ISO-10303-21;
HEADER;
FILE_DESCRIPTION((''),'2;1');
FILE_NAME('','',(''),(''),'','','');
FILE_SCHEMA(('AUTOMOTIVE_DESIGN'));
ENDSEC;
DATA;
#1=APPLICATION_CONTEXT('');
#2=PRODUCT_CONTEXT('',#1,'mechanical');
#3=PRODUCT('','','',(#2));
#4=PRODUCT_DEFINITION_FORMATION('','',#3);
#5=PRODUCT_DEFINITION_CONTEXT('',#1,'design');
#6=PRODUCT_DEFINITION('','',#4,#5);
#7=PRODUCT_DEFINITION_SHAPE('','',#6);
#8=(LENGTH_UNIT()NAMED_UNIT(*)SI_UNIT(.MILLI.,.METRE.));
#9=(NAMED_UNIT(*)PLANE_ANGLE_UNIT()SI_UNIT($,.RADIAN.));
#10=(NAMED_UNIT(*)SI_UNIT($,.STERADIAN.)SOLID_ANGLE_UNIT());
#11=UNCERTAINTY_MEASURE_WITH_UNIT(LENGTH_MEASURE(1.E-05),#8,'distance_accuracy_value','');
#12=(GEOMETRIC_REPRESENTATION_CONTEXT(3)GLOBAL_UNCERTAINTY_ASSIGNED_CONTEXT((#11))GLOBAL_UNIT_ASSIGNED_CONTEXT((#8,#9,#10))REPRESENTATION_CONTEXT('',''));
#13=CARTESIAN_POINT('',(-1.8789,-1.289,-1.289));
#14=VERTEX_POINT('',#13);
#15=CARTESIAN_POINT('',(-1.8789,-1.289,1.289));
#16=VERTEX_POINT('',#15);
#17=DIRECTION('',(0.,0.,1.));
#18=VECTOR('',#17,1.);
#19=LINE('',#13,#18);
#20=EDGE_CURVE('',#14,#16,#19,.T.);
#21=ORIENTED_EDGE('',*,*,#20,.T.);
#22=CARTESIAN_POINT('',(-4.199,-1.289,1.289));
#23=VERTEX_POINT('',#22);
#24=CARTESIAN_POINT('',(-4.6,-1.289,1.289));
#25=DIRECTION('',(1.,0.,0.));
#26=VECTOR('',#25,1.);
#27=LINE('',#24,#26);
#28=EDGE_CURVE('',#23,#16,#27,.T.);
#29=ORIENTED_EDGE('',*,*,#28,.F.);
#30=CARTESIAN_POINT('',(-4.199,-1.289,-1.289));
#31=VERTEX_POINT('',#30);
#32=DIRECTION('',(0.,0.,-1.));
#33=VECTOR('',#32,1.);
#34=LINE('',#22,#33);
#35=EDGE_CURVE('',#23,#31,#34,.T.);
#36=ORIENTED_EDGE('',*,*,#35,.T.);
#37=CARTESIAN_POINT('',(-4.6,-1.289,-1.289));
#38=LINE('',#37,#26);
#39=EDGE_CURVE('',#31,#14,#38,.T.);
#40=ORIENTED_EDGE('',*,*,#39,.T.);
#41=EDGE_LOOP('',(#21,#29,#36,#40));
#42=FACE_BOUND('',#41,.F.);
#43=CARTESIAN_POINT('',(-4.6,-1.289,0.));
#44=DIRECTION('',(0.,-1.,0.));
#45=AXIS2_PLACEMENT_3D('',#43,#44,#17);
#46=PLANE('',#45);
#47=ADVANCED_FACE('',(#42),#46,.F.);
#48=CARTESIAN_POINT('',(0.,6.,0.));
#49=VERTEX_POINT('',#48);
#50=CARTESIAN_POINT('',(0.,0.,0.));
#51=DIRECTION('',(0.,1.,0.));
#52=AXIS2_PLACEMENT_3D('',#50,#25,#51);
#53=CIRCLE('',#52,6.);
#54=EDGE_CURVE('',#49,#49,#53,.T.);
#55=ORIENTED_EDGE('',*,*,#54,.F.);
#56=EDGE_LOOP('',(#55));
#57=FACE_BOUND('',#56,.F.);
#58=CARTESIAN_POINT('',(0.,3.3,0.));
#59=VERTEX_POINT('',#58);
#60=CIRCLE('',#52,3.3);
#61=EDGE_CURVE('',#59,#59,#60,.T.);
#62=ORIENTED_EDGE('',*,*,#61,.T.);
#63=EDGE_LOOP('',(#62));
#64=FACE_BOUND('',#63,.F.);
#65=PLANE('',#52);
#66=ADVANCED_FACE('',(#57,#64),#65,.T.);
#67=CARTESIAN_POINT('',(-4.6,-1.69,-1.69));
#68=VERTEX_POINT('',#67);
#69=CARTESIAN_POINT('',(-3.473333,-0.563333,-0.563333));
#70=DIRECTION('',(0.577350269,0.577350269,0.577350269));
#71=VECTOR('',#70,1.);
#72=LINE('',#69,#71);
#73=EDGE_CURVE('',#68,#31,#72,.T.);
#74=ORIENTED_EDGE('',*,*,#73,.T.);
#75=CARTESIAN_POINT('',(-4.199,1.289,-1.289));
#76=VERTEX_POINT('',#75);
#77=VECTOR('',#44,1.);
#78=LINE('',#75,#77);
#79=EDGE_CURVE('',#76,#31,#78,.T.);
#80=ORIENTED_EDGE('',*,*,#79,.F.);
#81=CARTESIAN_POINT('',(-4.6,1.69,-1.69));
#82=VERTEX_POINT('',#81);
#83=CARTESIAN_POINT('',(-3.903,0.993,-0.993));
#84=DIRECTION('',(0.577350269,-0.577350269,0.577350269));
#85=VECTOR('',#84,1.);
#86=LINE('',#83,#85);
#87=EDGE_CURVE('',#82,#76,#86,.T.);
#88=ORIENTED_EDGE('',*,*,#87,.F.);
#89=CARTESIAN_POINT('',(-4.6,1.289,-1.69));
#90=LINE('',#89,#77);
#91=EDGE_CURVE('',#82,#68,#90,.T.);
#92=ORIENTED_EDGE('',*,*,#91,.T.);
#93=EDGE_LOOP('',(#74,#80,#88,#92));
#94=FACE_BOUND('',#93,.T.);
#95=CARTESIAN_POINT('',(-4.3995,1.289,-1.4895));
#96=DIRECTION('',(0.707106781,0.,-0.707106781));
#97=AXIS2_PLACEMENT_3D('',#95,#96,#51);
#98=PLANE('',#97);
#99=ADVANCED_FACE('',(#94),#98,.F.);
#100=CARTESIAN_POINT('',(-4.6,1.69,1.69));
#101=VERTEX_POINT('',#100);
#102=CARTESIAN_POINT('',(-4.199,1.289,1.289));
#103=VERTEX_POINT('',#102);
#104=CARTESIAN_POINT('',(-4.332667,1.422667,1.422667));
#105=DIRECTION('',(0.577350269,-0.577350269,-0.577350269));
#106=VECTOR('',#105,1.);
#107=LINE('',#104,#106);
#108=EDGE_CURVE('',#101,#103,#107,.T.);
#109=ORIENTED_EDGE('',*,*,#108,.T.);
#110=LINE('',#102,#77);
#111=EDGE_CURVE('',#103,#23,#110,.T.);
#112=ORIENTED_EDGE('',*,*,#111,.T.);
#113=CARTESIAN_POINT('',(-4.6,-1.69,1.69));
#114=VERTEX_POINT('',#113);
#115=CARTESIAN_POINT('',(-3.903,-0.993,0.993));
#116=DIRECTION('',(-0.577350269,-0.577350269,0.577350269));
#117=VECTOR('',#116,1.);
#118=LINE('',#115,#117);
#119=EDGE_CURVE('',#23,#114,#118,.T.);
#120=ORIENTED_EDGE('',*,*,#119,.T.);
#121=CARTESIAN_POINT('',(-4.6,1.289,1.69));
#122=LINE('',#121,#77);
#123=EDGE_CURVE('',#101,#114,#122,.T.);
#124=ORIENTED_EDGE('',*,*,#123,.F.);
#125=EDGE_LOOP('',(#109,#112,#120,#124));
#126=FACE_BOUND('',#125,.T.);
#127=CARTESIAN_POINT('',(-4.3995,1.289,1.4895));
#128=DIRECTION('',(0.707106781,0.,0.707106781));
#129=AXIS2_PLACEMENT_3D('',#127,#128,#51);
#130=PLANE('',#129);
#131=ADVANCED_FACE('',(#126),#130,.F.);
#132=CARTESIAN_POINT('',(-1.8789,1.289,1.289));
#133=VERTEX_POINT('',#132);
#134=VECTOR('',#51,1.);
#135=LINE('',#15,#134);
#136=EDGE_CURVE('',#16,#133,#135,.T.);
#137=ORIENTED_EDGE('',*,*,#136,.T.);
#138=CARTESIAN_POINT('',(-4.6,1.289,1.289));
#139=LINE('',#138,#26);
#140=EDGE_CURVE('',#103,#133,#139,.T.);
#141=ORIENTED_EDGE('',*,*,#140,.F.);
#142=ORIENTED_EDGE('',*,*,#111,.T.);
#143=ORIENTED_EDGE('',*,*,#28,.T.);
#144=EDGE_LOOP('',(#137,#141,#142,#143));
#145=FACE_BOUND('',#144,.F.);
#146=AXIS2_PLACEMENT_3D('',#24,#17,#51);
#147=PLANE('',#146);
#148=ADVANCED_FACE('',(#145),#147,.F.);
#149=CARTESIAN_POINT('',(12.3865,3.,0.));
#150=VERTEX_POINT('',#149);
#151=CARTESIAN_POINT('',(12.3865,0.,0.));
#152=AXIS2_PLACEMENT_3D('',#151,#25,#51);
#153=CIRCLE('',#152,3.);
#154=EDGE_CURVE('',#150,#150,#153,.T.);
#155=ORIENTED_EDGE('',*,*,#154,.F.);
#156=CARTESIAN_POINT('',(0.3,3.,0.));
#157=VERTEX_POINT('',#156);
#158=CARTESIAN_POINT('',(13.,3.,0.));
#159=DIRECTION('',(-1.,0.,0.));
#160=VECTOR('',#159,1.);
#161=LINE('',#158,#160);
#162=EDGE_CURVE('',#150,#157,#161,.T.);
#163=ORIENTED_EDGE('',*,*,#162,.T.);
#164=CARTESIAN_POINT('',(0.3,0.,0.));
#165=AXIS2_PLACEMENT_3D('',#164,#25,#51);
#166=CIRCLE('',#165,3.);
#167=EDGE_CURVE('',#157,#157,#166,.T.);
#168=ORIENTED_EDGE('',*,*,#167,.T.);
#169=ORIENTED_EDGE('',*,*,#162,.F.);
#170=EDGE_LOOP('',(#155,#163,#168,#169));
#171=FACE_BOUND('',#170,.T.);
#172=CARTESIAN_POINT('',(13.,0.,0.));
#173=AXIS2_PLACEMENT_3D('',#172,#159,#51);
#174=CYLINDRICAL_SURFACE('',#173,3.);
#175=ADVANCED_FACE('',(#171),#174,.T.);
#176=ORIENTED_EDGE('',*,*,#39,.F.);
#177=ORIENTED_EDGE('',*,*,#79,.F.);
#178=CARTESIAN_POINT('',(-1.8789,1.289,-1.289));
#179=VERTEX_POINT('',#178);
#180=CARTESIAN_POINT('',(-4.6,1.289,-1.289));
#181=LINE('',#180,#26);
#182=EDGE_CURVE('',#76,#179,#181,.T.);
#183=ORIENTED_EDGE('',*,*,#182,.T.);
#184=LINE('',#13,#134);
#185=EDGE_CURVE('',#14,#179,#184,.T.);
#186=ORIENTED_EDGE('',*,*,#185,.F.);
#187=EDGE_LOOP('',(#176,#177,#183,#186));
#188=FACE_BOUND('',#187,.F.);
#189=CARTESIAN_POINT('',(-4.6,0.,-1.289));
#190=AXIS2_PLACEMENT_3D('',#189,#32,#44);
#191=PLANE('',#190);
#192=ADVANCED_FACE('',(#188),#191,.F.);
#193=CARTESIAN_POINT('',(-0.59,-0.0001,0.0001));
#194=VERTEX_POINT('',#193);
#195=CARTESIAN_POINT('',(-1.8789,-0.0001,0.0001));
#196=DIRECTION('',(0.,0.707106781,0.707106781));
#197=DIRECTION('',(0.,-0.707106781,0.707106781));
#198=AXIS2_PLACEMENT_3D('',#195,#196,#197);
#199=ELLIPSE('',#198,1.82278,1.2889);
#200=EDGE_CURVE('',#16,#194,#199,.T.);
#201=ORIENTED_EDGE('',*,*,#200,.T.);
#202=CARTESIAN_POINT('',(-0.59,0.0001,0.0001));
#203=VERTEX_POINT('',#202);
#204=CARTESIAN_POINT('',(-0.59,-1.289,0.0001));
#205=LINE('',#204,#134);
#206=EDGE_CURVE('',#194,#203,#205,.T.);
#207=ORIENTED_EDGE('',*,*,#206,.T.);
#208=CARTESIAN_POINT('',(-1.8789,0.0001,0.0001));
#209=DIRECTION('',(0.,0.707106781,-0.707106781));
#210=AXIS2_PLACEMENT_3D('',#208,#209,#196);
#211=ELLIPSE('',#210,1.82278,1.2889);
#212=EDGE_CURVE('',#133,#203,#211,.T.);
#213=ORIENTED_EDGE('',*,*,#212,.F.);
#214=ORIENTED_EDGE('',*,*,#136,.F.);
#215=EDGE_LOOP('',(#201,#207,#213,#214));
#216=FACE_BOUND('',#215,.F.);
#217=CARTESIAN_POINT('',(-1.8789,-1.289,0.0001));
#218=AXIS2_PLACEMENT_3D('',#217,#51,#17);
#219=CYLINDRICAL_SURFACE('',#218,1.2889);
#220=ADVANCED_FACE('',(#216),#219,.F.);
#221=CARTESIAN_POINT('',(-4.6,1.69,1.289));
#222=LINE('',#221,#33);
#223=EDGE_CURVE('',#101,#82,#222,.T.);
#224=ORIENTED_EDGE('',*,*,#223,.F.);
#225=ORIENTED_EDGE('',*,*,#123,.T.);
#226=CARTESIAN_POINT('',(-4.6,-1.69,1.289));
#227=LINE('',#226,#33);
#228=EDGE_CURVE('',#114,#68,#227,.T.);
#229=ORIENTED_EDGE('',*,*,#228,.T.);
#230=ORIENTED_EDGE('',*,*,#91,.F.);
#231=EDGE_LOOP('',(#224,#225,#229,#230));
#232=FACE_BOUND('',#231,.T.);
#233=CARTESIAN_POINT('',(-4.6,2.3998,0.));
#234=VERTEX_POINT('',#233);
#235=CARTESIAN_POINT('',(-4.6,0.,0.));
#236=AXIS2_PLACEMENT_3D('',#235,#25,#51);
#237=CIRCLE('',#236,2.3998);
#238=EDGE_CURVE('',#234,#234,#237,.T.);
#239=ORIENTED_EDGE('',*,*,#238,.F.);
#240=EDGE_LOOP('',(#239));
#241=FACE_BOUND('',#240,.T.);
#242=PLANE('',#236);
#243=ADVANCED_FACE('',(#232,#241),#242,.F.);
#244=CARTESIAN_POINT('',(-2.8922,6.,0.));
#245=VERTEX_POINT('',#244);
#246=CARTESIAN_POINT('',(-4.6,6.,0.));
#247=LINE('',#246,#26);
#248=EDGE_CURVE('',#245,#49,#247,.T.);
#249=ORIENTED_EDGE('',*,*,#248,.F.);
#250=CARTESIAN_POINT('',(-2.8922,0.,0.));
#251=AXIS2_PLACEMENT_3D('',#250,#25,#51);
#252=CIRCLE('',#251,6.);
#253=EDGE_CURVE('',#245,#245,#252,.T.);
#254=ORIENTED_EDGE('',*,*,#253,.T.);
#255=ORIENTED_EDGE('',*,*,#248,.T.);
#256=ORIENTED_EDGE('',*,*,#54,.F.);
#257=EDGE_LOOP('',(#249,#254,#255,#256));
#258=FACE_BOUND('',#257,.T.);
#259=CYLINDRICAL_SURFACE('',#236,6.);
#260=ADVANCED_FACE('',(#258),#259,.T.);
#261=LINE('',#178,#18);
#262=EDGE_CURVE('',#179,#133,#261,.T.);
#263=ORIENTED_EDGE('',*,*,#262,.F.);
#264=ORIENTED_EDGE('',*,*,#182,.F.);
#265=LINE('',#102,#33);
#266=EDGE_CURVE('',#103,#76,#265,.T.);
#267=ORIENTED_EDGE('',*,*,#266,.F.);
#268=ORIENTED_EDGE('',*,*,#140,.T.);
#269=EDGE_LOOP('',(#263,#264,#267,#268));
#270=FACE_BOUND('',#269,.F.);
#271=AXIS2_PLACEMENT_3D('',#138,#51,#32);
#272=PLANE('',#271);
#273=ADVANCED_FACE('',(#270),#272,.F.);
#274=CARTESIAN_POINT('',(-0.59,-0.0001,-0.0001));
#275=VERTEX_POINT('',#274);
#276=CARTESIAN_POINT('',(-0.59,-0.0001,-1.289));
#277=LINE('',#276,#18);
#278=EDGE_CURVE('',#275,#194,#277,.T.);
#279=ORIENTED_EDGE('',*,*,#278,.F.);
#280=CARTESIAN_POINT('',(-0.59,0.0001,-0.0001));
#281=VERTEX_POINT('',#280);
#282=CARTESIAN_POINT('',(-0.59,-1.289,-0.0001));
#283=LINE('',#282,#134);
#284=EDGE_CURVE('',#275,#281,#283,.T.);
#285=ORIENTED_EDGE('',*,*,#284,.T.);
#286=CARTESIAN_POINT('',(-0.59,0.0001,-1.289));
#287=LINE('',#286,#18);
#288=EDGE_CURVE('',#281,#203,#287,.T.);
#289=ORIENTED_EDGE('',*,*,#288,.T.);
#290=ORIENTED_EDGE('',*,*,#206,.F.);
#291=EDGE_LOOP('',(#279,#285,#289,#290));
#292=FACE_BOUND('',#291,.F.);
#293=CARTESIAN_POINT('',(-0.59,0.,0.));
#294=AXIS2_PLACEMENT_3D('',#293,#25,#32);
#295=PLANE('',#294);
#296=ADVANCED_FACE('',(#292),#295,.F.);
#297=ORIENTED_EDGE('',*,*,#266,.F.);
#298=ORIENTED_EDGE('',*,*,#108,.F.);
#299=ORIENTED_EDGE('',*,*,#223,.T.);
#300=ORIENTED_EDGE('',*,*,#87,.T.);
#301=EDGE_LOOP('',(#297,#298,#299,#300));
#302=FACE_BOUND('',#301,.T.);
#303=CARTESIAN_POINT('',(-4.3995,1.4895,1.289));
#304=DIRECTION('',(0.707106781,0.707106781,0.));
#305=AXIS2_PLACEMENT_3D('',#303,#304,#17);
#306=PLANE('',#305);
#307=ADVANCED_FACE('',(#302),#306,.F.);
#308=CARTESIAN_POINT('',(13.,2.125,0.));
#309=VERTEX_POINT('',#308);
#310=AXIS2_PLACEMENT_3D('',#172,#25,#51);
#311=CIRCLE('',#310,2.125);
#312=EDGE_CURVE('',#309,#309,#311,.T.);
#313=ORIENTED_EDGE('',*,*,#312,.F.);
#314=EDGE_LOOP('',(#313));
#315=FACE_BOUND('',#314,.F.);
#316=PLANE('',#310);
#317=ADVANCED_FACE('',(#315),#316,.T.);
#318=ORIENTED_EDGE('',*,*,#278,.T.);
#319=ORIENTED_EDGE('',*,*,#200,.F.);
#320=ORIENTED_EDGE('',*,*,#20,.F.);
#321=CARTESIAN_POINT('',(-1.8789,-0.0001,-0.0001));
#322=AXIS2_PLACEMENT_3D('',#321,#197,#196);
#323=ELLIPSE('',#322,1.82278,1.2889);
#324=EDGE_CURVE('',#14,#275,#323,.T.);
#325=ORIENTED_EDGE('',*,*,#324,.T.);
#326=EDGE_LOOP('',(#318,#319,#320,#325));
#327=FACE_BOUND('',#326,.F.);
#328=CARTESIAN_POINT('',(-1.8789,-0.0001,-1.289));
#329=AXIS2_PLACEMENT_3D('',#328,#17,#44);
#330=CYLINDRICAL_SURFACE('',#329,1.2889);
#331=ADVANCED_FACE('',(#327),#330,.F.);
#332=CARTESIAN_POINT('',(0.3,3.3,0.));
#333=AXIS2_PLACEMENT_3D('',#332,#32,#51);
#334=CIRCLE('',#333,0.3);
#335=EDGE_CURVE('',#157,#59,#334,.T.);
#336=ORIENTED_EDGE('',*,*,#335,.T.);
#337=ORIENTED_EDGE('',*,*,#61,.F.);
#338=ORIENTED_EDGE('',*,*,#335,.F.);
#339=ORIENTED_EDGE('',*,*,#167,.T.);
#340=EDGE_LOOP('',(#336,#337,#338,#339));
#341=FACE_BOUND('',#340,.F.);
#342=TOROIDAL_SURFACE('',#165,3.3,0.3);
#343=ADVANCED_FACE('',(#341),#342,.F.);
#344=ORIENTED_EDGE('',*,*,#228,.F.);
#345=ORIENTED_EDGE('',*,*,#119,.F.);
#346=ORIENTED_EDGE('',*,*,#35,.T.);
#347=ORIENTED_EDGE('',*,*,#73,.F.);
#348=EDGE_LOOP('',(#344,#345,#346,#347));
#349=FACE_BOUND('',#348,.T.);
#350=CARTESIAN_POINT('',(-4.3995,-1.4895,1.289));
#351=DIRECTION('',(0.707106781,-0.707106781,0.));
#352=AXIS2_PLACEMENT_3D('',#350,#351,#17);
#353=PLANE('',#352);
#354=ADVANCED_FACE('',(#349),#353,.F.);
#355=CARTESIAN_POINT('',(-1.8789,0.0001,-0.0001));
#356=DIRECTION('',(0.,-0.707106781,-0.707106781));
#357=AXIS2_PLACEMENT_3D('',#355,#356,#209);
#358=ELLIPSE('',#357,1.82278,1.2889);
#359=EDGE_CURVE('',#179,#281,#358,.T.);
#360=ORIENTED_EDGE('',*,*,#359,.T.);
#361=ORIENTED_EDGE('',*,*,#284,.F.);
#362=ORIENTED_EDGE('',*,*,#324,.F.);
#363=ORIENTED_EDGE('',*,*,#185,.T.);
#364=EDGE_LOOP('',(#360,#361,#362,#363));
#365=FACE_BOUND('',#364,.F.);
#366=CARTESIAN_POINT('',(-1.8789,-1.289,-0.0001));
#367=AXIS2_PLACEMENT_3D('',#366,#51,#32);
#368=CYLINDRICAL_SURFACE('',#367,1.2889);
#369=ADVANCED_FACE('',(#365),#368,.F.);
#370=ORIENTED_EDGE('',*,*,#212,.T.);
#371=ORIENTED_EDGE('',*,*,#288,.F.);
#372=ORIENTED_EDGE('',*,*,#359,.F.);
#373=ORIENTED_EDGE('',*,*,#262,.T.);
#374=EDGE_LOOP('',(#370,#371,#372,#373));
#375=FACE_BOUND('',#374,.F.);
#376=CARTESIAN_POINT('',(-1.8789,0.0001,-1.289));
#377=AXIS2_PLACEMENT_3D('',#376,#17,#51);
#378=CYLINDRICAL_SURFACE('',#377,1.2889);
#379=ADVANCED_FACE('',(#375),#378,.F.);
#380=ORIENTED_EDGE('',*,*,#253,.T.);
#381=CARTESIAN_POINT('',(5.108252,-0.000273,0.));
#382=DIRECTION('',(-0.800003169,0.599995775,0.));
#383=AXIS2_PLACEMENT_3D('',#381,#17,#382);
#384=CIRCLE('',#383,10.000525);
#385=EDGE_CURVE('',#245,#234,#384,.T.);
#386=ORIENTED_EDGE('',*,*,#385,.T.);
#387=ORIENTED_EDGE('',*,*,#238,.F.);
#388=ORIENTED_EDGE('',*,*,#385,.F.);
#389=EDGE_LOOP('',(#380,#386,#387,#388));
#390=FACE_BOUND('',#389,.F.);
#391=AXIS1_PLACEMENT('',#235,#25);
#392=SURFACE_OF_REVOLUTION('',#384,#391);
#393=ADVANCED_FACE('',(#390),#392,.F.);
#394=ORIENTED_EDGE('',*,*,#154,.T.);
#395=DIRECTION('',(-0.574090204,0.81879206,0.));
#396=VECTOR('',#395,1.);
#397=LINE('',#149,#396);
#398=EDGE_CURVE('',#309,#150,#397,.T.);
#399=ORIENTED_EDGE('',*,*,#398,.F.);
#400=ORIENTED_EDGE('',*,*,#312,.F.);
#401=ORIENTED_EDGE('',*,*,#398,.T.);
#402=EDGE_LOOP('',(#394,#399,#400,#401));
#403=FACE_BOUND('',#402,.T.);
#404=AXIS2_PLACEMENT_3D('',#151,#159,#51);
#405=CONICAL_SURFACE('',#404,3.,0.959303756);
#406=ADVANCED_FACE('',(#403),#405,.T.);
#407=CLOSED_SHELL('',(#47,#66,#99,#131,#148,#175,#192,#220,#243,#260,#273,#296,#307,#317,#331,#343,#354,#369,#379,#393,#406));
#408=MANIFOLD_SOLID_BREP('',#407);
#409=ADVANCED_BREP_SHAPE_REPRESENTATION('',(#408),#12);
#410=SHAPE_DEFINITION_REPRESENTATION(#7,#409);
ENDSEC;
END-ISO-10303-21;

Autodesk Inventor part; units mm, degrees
ref_plane "YZ Plane" through (0, 0, 0) normal (1, 0, 0) x (0, 1, 0)
sketch "Sketch1" plane through (0, 0, 0) normal (0, 0, 1) x (1, 0, 0)
  line L0 (-0.59, 0) -> (13, 0)
  line L1 (13, 0) -> (13, 3)
  line L2 (13, 3) -> (0, 3)
  line L3 (0, 3) -> (0, 6)
  line L4 (-8.7003, 0) -> (16.6167, 0) projected
  line L5 (0, -1.2172) -> (0, 7.3031) projected
  line L6 (-4.6, 2.3998) -> (-5.0836, 2.3998) construction
  line L7 (-4.6, 0) -> (-0.59, 0)
  line L8 (0, 0) -> (-0.59, 0)
  line L9 (-4.6, 0) -> (-4.6, 6)
  arc A0 (-2.8922, 6) -> (-4.6, 2.3998) centre (5.1078, 0) ccw
  line L10 (-4.6, 6) -> (0, 6)
  dimension "d0" = 13
  dimension "d1" = 6
  dimension "d2" = 12
  dimension "d4" = 4.7996
  dimension "d13" = 4.6
  dimension "d14" = 4.01
  dimension "d46" = 10
  dimension "d47" = 0
revolve "Body" add sketch "Sketch1" angle 360 about axis through (-0.59, 0, 0) along (1, 0, 0) contours L4 L9 A0 L10 L3 L5 L0 | L5 L2 L1 L0
ref_plane "IDS_WORKPLANE{1}" through (-4.6, 0, 0) normal (1, 0, 0) x (0, 0, -1)
sketch "Sketch2" plane through (-4.6, 0, 0) normal (1, 0, 0) x (0, 0, -1)
  line L0 (0, -8.4) -> (0, 8.4) projected
  line L1 (8.4, 0) -> (-8.4, 0) projected
  line L2 (-1.289, 1.289) -> (1.289, 1.289)
  line L3 (1.289, 1.289) -> (1.289, -1.289)
  line L4 (1.289, -1.289) -> (-1.289, -1.289)
  line L5 (-1.289, -1.289) -> (-1.289, 1.289)
  line L6 (0, 1.289) -> (0, -1.289) construction
  line L7 (-1.289, 0) -> (1.289, 0) construction
  dimension "d7" = 2.578
  dimension "d9" = 2.578
extrude "Extrusion" cut sketch "Sketch2" along normal blind 4.01
fillet "Fillet1" radius 1.289 4 edges at (-0.59, 0, -1.289) (-0.59, -1.289, 0) (-0.59, 0, 1.289) (-0.59, 1.289, 0)
chamfer "Chamfer1" distance 0.401 angle 45 4 edges at (-4.6, 1.289, 0) (-4.6, 0, -1.289) (-4.6, -1.289, 0) (-4.6, 0, 1.289)
thread "Thread" size "M6x1" class "6g" standard "ISO Metric profile" length 12
chamfer "Chamfer2" distance 0.875 distance2 0.6135 1 edges at (13, -3, 0) measured on face at (13, -1.1424, 0.935)
ref_plane "Work Plane2" through (69.85, 0, 0) normal (0, 0, -1) x (1, 0, 0)
fillet "Fillet2" radius 0.3 1 edges at (0, -3, 0)
equation "\"d0\" = NLG"
equation "\"d1\" = GD"
equation "\"d2\" = KOD"
equation "\"d4\" = 1.42 * KOM"
equation "\"d13\" = KOH"
equation "\"d14\" = STI"
equation "\"d46\" = KR"
equation "\"d7\" = KOM - 0.2 * STI"
equation "\"d9\" = KOM - 0.2 * STI"
equation "\"d48\" = STI"
equation "\"d50\" = -0.1 * STI + 0.5 * KOM"
equation "\"d51\" = 0.1 * STI"
equation "\"d18\" = GEL"
equation "\"d20\" = -0.5 * SPD + 0.5 * GD"
equation "\"d21\" = GUL"
equation "\"d44\" = R"
equation "\"GD\" = 6"
equation "\"NLG\" = 13"
equation "\"GEL\" = 12"
equation "\"KOD\" = 12"
equation "\"KOH\" = 4.6"
equation "\"SPD\" = 4.25"
equation "\"KR\" = 10"
equation "\"RR\" = 2"
equation "\"GUL\" = 0.61345 * PTC"
equation "\"KEWI\" = 0"
equation "\"SDM\" = 3.38"
equation "\"STI\" = 4.01"
equation "\"d6\" = -KOH"
equation "\"R\" = 0.3"
equation "\"KOM\" = 3.38"
equation "\"PTC\" = 1"
properties part number "ANSI B18.6.7M - M6x1 x 13, SRPHMSTIM" material "Steel, Mild"
